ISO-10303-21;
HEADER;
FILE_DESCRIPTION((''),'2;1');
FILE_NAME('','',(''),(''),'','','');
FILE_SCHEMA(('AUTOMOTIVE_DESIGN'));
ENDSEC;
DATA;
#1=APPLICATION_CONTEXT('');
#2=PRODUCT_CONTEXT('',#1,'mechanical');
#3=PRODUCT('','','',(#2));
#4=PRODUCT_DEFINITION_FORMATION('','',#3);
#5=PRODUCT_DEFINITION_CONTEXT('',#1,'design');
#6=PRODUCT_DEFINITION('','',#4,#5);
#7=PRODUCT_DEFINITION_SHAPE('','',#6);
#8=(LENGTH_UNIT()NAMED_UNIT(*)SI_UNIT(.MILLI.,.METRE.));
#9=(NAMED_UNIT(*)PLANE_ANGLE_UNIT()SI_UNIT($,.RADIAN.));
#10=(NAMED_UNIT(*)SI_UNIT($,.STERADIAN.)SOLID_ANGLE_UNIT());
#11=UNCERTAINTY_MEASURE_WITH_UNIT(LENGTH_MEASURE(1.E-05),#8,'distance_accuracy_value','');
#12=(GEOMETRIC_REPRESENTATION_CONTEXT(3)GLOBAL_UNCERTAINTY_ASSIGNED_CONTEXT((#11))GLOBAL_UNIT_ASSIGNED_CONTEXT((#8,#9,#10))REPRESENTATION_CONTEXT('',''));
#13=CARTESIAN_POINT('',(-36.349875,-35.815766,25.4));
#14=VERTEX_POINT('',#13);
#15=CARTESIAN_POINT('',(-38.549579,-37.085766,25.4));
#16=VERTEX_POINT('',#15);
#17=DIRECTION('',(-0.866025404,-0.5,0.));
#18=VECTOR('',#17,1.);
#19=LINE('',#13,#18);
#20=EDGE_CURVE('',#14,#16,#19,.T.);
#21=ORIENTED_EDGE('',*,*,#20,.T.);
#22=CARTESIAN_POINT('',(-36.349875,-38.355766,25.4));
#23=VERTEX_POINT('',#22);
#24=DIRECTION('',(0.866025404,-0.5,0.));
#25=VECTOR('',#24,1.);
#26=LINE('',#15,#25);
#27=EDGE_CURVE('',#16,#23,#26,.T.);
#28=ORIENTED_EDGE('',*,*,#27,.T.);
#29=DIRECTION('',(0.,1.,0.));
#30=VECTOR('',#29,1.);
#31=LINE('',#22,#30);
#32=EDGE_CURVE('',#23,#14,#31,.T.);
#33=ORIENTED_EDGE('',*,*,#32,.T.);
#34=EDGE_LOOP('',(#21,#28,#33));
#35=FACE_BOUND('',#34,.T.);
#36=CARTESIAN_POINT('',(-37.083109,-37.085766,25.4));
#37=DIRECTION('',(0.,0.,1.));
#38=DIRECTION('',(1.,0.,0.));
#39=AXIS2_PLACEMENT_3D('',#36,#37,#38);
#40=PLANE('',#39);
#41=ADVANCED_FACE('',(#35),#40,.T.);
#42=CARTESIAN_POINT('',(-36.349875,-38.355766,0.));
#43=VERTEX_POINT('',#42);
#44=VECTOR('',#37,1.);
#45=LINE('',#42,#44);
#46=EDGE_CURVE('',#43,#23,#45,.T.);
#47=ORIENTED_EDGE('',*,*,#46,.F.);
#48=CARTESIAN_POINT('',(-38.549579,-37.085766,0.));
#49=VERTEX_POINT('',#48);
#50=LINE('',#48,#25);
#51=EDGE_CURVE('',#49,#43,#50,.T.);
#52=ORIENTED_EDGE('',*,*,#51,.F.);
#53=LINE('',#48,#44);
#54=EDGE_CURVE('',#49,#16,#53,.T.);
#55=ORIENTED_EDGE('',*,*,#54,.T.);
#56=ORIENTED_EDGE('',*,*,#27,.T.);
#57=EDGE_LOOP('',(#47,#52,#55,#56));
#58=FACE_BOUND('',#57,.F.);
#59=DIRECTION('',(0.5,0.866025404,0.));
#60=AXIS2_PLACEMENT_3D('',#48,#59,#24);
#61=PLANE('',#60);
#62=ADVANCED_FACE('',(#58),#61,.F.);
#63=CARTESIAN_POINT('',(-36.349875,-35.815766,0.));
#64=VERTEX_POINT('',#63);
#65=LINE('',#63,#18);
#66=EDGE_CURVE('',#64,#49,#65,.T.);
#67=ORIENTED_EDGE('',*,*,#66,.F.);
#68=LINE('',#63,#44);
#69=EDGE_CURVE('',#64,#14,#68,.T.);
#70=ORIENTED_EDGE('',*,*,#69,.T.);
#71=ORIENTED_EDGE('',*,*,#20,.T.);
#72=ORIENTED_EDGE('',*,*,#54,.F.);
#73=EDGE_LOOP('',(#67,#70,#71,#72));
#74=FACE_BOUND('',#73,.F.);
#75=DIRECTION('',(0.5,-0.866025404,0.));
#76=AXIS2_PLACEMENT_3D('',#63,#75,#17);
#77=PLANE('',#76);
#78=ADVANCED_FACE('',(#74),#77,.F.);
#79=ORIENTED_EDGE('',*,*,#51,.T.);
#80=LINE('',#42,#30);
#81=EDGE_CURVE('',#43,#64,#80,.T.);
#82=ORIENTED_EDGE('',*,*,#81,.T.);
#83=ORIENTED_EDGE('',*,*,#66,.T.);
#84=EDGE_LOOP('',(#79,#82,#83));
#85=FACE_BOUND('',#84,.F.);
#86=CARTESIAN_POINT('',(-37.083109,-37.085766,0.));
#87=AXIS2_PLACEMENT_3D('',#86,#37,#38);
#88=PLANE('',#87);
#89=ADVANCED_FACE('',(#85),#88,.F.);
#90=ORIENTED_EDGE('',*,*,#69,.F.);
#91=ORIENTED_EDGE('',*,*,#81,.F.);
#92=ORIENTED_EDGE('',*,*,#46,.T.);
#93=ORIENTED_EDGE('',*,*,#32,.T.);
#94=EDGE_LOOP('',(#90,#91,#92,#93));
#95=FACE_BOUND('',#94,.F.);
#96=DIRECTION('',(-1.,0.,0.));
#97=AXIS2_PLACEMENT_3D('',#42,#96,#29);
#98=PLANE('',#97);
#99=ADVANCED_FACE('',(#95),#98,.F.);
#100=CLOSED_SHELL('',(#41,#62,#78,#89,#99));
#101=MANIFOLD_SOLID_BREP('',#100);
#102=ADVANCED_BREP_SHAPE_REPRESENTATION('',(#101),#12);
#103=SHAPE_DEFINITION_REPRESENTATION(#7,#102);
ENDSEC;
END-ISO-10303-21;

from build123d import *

# Parameters (mm, degrees)
F1_DEPTH = 25.4


# Not quite as in the source:
# - the program builds the solid bodies; features that only make, move or delete a surface that nothing else refers to are left out


with BuildPart() as f1:
    # F0 (on Top) → F1 (new body)
    with BuildSketch(Plane.XY):
        Polygon((-36.3498746287, -35.8157656759), (-38.5495791543, -37.0857656759), (-36.3498746287, -38.3557656759), align=None)
    extrude(amount=F1_DEPTH)


solid = f1.part
